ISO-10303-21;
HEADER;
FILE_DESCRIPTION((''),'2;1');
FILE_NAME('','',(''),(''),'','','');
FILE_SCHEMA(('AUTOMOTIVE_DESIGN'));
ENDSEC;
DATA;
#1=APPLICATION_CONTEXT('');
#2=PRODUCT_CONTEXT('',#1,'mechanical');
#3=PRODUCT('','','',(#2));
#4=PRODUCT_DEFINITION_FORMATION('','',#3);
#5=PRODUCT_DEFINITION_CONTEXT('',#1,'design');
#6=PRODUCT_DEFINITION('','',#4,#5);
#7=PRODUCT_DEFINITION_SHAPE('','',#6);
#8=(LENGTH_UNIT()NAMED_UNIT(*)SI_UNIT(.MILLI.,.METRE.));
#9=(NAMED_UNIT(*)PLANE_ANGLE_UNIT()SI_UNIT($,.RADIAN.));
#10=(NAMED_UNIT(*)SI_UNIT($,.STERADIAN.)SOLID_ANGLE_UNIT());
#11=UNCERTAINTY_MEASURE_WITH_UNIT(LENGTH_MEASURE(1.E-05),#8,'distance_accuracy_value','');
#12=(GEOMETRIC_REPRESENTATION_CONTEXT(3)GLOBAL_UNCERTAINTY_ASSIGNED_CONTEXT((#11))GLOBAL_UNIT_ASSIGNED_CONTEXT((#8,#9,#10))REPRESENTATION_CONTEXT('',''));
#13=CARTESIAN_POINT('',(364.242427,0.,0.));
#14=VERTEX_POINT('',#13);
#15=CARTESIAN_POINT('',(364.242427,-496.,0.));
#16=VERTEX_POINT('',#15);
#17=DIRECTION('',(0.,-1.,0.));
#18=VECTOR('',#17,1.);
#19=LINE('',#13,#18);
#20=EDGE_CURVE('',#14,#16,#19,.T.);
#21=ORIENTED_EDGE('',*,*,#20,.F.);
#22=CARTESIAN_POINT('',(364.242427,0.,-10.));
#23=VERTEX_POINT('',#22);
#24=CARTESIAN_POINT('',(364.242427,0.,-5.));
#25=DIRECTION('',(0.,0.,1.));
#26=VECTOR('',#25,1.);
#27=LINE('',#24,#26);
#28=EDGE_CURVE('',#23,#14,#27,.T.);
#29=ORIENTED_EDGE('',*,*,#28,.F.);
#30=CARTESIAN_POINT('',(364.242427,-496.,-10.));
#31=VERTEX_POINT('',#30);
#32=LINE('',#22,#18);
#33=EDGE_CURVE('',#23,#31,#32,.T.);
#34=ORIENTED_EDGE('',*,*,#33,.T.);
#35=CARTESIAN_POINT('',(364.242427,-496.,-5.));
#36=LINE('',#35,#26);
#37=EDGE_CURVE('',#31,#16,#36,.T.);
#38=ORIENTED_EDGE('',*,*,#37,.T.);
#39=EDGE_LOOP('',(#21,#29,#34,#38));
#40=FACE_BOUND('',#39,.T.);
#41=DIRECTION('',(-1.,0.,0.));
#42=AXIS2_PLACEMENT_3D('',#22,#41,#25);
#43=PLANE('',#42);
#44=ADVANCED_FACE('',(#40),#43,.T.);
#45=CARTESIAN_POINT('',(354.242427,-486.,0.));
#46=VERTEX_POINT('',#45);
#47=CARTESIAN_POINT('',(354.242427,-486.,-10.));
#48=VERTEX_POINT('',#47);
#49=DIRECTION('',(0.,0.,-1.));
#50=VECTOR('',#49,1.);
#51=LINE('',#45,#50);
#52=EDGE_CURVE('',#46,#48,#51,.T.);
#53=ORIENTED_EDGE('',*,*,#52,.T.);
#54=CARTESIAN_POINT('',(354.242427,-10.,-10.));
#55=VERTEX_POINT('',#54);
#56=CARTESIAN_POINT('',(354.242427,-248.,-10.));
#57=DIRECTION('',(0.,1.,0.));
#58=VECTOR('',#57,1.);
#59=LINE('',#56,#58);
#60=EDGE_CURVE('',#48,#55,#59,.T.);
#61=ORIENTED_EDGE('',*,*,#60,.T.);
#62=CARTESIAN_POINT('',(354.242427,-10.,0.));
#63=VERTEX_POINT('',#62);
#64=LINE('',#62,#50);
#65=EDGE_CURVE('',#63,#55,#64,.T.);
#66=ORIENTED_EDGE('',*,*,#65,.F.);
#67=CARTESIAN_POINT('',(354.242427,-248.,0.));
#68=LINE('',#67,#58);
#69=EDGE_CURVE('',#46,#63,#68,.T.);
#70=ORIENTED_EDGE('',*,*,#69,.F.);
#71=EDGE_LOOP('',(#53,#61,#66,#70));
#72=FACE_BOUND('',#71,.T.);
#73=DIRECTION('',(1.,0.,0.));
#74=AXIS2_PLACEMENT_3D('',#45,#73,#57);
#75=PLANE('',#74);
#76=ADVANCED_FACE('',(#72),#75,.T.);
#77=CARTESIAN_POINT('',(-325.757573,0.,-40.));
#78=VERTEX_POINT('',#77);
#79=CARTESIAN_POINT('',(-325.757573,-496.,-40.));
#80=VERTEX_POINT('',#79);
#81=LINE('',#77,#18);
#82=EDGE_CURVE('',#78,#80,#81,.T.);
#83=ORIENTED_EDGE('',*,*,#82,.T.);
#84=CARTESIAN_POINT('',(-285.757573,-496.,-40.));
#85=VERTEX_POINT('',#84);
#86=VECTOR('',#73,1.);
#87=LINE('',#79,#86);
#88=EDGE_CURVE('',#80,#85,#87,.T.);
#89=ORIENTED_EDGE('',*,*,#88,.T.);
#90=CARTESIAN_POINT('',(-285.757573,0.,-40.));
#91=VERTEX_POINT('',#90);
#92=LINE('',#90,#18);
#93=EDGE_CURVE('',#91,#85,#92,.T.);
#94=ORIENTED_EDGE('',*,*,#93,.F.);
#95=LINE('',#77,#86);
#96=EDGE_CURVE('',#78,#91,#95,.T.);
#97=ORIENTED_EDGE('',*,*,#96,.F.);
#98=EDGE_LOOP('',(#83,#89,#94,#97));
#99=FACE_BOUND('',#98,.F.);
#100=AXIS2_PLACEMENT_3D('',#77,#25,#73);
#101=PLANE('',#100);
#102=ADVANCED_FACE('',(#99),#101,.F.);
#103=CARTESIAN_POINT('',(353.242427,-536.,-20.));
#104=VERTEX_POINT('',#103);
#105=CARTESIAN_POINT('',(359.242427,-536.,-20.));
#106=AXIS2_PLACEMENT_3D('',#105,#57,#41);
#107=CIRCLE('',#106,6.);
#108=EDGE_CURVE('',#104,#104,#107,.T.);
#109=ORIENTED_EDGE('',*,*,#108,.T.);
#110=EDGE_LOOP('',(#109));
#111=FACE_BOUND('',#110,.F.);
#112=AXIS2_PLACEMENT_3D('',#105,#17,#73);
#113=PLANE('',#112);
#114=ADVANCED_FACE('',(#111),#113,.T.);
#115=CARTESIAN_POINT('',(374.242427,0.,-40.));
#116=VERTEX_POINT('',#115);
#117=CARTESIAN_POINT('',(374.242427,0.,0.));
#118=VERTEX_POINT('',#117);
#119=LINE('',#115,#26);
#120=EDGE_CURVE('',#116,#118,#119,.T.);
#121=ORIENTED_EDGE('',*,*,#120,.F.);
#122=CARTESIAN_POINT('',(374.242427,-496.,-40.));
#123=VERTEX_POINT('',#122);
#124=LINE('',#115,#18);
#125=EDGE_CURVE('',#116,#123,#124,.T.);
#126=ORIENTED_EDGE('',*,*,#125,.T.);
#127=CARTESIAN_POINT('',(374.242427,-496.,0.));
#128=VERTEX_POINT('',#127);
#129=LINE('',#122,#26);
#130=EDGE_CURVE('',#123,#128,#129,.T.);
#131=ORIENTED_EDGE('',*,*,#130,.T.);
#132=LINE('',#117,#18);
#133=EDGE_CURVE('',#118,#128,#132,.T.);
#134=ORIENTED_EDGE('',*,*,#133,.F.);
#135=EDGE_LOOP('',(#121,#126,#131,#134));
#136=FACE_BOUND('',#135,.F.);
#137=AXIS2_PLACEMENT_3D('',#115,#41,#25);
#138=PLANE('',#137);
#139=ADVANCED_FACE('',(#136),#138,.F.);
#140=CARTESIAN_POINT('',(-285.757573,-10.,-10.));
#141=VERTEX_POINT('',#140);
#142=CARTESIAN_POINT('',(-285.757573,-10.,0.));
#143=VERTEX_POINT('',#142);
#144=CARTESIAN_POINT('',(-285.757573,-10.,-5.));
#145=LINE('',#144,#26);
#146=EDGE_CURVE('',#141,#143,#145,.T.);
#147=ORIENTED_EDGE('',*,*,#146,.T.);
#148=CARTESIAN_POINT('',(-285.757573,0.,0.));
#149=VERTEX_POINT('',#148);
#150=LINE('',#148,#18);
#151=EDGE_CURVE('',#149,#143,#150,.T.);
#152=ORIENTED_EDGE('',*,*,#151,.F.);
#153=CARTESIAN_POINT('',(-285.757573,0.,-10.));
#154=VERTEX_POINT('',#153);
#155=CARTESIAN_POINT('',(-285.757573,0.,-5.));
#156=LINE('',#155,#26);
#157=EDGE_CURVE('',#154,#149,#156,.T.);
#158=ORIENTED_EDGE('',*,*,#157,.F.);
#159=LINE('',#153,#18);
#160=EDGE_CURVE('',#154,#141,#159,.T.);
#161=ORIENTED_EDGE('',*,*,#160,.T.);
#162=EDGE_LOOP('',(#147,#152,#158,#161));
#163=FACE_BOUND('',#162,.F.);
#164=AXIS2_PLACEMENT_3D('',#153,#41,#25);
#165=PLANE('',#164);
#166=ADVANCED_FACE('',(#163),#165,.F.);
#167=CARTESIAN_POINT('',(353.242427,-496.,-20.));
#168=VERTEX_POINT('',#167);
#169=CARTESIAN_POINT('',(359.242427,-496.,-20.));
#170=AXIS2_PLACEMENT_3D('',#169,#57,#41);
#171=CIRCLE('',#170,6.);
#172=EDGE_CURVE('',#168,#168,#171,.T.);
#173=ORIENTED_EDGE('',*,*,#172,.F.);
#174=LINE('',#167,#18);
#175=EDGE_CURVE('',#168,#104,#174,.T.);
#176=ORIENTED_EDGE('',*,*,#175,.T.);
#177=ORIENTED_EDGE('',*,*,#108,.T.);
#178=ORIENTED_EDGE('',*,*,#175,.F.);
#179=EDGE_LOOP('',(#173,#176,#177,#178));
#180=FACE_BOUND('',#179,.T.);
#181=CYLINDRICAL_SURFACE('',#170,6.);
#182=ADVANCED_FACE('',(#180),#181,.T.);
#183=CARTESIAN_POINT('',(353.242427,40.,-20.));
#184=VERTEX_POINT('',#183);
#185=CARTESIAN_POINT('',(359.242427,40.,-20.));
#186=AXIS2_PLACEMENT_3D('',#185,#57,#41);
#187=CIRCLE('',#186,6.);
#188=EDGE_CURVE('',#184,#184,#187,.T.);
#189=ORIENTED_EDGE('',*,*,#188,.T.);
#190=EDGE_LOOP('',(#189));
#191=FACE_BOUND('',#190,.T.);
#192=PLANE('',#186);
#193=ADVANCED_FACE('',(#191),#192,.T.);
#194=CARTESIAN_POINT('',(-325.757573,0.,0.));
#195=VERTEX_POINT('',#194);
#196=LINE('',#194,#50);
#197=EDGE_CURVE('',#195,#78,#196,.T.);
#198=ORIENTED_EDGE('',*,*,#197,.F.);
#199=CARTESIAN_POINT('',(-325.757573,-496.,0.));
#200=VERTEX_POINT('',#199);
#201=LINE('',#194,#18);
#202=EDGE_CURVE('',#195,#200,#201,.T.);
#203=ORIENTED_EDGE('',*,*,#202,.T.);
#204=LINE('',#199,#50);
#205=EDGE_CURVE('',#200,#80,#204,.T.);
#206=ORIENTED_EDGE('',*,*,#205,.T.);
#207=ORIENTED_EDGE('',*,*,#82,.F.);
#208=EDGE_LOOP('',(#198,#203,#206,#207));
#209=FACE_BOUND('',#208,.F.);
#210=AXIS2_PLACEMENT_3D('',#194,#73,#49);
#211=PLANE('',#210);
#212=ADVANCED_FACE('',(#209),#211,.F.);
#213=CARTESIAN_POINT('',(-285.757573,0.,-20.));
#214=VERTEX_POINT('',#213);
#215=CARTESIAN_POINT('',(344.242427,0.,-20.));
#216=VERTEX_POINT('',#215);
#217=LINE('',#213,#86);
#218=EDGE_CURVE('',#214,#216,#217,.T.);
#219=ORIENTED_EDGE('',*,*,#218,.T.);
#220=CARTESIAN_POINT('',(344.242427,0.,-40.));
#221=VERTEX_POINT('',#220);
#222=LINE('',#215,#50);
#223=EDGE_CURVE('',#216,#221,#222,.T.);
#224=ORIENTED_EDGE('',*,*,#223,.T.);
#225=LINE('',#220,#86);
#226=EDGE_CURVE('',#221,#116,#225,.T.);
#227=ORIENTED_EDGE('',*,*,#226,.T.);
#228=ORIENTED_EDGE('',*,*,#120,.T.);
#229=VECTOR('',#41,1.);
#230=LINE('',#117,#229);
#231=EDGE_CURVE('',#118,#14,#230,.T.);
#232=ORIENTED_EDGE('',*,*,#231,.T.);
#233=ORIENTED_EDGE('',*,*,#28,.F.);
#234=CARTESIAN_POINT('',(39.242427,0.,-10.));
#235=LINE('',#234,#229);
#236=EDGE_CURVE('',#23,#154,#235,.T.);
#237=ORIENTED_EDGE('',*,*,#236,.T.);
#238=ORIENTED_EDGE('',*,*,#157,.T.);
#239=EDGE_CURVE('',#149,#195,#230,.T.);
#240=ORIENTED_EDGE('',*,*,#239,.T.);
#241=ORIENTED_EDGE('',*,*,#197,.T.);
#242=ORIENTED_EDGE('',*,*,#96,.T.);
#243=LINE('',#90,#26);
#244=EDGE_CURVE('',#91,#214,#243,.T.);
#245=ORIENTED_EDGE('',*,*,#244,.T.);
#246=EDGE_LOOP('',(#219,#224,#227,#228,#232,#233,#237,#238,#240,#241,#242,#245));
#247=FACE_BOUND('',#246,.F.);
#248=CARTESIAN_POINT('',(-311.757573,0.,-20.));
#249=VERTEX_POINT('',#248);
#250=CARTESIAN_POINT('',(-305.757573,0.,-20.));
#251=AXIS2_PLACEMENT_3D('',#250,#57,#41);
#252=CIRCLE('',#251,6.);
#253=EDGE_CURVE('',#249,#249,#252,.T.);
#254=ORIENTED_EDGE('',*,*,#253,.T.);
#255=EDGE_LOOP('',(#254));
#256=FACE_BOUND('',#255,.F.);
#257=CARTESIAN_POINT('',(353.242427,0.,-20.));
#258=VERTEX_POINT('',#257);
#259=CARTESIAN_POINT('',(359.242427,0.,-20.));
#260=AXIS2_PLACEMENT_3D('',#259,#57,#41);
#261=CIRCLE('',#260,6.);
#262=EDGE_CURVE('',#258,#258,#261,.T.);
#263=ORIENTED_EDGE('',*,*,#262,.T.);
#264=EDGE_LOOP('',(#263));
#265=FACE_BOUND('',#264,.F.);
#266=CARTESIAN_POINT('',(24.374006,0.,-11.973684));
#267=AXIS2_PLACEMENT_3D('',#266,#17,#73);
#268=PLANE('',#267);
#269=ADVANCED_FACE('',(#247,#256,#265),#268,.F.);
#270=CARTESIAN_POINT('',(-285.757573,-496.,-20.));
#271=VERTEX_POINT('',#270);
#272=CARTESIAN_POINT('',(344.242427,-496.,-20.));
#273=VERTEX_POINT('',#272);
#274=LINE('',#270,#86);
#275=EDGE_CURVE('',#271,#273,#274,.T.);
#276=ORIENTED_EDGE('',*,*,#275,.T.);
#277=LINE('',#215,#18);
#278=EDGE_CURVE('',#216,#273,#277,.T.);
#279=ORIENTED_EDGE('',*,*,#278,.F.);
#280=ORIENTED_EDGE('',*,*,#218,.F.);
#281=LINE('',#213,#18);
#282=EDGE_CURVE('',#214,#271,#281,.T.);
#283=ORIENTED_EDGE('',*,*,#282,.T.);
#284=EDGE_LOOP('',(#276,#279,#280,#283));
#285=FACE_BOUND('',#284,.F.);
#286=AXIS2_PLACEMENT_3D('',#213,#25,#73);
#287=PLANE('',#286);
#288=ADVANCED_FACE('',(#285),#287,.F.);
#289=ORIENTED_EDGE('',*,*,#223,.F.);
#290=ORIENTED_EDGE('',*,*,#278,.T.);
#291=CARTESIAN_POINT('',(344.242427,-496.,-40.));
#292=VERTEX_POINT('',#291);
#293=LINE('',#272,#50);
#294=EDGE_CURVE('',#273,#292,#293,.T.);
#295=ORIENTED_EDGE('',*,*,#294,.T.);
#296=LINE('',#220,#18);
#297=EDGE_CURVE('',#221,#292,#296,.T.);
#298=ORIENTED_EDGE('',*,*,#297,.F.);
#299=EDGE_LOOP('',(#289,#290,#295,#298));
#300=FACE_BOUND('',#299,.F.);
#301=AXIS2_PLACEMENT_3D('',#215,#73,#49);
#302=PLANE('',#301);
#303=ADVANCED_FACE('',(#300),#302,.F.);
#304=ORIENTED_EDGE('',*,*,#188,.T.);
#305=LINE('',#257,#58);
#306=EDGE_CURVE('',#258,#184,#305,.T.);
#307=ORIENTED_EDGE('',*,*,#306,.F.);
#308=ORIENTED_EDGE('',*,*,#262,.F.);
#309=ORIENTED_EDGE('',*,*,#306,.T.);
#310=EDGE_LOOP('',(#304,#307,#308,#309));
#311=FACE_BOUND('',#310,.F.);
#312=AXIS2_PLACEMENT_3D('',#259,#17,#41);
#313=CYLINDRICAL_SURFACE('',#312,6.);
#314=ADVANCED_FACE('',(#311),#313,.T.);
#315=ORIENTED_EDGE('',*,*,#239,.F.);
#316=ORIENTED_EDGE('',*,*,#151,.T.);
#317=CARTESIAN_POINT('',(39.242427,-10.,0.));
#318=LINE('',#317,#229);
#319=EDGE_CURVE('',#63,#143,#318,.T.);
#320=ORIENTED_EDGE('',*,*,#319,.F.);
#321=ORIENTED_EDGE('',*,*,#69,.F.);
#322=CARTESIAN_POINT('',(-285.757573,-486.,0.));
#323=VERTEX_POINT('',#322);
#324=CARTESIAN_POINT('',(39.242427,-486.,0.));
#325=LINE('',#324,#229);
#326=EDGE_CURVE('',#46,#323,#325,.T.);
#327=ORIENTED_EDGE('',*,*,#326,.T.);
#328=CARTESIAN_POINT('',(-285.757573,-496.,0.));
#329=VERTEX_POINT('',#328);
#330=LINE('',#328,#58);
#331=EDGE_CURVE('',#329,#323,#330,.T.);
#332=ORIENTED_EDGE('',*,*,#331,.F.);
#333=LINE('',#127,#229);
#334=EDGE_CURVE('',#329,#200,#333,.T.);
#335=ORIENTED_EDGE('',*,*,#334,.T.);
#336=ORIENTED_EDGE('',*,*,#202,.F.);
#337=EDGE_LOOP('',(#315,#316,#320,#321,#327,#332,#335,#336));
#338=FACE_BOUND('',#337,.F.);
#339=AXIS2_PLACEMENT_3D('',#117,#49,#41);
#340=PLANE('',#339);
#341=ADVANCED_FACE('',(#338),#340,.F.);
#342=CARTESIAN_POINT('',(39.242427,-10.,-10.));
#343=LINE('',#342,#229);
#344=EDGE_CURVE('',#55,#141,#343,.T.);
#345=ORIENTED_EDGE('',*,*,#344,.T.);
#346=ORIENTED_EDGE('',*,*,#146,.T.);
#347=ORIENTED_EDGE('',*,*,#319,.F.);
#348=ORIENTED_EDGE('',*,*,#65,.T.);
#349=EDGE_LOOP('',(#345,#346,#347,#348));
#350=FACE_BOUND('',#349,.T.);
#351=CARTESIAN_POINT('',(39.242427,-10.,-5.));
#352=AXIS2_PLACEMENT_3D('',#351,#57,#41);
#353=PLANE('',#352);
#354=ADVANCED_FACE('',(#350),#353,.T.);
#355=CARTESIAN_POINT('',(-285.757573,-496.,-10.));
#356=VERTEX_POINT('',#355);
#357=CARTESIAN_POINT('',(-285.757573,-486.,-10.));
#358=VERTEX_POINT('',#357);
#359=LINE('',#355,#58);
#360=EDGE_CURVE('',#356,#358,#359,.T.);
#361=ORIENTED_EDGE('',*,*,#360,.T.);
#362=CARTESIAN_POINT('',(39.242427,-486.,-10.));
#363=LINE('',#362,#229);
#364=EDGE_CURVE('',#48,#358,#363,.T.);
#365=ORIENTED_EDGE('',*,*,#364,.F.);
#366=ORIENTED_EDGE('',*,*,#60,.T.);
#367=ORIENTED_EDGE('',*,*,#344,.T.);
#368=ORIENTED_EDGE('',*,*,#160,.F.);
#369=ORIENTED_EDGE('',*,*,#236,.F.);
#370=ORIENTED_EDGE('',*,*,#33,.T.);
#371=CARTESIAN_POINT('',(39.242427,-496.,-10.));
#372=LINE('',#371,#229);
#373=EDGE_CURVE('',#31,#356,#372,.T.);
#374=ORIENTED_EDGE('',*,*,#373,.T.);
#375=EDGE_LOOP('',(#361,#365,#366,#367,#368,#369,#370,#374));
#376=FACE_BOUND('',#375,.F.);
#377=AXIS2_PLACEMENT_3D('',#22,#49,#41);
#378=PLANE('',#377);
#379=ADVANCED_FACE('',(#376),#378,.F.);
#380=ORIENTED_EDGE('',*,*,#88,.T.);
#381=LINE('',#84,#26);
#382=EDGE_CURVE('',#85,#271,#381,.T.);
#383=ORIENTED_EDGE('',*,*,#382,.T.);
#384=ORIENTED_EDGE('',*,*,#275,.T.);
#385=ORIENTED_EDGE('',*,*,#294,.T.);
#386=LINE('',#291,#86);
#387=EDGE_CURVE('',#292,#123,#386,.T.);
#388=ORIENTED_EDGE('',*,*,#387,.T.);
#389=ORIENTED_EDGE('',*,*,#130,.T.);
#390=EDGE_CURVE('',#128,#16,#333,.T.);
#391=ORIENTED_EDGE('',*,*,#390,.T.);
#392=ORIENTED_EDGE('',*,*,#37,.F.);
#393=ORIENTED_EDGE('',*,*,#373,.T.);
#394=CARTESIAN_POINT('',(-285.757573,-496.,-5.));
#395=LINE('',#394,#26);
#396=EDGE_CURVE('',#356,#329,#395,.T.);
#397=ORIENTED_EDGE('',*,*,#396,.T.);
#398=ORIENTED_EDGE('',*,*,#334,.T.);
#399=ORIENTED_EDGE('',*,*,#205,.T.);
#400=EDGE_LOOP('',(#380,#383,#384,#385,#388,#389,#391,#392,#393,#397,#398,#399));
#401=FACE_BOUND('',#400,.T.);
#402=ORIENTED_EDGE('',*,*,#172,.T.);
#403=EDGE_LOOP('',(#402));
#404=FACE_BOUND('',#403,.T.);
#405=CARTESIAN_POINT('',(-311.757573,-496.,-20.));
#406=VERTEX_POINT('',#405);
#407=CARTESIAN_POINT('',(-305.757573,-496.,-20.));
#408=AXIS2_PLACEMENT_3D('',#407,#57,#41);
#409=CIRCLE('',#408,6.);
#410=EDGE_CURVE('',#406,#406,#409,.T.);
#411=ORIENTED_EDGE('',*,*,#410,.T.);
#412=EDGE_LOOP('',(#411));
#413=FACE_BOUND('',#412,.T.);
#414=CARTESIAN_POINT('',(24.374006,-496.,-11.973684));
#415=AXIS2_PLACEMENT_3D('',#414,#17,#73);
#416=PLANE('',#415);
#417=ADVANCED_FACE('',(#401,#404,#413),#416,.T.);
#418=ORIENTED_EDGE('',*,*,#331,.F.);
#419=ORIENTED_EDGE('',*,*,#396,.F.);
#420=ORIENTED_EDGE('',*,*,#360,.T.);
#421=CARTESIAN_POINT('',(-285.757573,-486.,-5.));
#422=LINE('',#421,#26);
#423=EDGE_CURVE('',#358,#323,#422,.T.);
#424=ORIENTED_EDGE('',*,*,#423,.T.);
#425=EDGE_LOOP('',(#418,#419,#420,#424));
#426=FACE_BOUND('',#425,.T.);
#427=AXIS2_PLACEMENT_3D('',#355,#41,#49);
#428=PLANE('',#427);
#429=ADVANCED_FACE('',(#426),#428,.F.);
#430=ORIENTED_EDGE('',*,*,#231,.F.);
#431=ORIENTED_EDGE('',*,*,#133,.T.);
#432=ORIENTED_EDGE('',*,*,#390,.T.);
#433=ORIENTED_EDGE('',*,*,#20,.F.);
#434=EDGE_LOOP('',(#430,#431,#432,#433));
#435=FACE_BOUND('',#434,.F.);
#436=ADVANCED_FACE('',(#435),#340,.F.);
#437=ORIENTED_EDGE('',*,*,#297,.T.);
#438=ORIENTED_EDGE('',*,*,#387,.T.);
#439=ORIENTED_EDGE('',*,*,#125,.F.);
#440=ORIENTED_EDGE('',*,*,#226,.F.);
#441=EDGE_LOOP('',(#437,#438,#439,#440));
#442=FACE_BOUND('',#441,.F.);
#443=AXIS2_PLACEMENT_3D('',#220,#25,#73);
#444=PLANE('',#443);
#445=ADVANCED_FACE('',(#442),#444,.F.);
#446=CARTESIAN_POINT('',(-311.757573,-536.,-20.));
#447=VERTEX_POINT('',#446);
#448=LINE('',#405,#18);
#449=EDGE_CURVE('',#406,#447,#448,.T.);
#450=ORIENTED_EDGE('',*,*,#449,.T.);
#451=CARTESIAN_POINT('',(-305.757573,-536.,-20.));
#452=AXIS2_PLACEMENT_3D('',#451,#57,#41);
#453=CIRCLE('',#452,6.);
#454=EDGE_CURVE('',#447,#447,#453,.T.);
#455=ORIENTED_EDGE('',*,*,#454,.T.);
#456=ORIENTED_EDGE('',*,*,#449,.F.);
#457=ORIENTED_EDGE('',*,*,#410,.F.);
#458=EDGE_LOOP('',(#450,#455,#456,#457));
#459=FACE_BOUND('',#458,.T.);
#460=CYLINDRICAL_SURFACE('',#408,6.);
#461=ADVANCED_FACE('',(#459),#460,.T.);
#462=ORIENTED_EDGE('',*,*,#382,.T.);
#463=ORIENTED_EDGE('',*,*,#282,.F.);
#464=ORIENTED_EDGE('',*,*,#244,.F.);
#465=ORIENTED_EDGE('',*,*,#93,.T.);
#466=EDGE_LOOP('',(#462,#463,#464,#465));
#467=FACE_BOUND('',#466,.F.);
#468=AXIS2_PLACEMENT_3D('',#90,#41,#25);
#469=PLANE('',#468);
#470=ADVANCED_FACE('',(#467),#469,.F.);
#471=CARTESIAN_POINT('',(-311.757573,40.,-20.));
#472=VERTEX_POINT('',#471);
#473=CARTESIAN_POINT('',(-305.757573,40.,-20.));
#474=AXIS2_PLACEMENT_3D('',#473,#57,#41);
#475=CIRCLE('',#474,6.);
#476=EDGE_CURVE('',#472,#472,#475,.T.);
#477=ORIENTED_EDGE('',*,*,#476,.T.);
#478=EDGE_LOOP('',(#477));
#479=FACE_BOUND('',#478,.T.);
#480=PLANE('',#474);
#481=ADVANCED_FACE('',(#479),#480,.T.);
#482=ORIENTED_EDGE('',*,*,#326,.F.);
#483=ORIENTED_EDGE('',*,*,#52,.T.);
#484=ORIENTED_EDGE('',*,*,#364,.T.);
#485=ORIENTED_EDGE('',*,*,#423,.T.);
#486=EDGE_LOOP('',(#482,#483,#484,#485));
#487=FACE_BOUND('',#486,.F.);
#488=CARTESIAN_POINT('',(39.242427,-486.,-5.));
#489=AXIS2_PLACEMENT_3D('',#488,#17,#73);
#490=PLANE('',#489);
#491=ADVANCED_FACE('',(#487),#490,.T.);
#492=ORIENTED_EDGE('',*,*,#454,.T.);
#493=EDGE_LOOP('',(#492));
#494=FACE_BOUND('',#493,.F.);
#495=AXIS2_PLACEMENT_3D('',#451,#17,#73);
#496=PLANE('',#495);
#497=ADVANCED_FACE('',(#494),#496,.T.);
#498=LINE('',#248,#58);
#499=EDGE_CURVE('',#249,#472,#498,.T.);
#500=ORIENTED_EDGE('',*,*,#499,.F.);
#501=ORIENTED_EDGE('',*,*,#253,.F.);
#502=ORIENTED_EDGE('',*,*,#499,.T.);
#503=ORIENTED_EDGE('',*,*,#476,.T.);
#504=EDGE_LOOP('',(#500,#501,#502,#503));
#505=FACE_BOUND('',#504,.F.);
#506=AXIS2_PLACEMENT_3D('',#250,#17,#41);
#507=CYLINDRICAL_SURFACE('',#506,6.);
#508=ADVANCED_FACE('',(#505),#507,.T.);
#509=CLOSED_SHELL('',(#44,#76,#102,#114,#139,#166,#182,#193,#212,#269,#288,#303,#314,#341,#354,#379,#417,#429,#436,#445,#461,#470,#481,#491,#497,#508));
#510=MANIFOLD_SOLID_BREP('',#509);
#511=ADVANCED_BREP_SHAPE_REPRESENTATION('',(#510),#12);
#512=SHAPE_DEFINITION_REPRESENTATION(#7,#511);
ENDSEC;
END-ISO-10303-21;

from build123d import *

# Parameters (mm, degrees)
F1_DEPTH = 496
F2_R     = 6
F3_DEPTH = 40
F5_W     = 650
F5_H     = 10
F6_DEPTH = 10
F7_W     = 10
F7_H     = 476
F8_DEPTH = 10


# Not quite as in the source:
# - a pattern or mirror of a feature is missing from the dataset's text; its kind, count and spacing are read off the source's solid


with BuildPart() as f1:
    # F0 (on Front) → F1 (new body)
    with BuildSketch(Plane.XZ):
        Polygon((374.2424272732, 0), (-325.7575727268, 0), (-325.7575727268, -40), (-285.7575727268, -40), (-285.7575727268, -20), (344.2424272732, -20), (344.2424272732, -40), (374.2424272732, -40), align=None)
    extrude(amount=F1_DEPTH)

    # F2 (on face) → F3 (join)
    with BuildSketch(Plane(origin=(0, 0, 0), x_dir=(-1, 0, 0), z_dir=(0, 1, 0))):
        with Locations((-359.2424272732, -20)):
            Circle(F2_R)
        with Locations((305.7575727268, -20)):
            Circle(F2_R)
    f3 = extrude(amount=F3_DEPTH)

    # F3_copies: F3 across plane
    add(f3.mirror(Plane(origin=(0, -248, 0), x_dir=(0, 0, -1), z_dir=(0, -1, 0))))

    # F5 (on face) → F6 (cut)
    with BuildSketch(Plane(origin=(0, 0, 0), x_dir=(-1, 0, 0), z_dir=(0, 1, 0))):
        with Locations((-39.2424272732, -5)):
            Rectangle(F5_W, F5_H)
    f6 = extrude(amount=-F6_DEPTH, mode=Mode.SUBTRACT)

    # F6_copies: F6 across plane
    add(f6.mirror(Plane(origin=(0, -248, 0), x_dir=(0, 0, -1), z_dir=(0, -1, 0))), mode=Mode.SUBTRACT)

    # F7 (on face) → F8 (cut)
    with BuildSketch(Plane.XY):
        with Locations((359.2424272732, -248)):
            Rectangle(F7_W, F7_H)
    extrude(amount=-F8_DEPTH, mode=Mode.SUBTRACT)


solid = f1.part
